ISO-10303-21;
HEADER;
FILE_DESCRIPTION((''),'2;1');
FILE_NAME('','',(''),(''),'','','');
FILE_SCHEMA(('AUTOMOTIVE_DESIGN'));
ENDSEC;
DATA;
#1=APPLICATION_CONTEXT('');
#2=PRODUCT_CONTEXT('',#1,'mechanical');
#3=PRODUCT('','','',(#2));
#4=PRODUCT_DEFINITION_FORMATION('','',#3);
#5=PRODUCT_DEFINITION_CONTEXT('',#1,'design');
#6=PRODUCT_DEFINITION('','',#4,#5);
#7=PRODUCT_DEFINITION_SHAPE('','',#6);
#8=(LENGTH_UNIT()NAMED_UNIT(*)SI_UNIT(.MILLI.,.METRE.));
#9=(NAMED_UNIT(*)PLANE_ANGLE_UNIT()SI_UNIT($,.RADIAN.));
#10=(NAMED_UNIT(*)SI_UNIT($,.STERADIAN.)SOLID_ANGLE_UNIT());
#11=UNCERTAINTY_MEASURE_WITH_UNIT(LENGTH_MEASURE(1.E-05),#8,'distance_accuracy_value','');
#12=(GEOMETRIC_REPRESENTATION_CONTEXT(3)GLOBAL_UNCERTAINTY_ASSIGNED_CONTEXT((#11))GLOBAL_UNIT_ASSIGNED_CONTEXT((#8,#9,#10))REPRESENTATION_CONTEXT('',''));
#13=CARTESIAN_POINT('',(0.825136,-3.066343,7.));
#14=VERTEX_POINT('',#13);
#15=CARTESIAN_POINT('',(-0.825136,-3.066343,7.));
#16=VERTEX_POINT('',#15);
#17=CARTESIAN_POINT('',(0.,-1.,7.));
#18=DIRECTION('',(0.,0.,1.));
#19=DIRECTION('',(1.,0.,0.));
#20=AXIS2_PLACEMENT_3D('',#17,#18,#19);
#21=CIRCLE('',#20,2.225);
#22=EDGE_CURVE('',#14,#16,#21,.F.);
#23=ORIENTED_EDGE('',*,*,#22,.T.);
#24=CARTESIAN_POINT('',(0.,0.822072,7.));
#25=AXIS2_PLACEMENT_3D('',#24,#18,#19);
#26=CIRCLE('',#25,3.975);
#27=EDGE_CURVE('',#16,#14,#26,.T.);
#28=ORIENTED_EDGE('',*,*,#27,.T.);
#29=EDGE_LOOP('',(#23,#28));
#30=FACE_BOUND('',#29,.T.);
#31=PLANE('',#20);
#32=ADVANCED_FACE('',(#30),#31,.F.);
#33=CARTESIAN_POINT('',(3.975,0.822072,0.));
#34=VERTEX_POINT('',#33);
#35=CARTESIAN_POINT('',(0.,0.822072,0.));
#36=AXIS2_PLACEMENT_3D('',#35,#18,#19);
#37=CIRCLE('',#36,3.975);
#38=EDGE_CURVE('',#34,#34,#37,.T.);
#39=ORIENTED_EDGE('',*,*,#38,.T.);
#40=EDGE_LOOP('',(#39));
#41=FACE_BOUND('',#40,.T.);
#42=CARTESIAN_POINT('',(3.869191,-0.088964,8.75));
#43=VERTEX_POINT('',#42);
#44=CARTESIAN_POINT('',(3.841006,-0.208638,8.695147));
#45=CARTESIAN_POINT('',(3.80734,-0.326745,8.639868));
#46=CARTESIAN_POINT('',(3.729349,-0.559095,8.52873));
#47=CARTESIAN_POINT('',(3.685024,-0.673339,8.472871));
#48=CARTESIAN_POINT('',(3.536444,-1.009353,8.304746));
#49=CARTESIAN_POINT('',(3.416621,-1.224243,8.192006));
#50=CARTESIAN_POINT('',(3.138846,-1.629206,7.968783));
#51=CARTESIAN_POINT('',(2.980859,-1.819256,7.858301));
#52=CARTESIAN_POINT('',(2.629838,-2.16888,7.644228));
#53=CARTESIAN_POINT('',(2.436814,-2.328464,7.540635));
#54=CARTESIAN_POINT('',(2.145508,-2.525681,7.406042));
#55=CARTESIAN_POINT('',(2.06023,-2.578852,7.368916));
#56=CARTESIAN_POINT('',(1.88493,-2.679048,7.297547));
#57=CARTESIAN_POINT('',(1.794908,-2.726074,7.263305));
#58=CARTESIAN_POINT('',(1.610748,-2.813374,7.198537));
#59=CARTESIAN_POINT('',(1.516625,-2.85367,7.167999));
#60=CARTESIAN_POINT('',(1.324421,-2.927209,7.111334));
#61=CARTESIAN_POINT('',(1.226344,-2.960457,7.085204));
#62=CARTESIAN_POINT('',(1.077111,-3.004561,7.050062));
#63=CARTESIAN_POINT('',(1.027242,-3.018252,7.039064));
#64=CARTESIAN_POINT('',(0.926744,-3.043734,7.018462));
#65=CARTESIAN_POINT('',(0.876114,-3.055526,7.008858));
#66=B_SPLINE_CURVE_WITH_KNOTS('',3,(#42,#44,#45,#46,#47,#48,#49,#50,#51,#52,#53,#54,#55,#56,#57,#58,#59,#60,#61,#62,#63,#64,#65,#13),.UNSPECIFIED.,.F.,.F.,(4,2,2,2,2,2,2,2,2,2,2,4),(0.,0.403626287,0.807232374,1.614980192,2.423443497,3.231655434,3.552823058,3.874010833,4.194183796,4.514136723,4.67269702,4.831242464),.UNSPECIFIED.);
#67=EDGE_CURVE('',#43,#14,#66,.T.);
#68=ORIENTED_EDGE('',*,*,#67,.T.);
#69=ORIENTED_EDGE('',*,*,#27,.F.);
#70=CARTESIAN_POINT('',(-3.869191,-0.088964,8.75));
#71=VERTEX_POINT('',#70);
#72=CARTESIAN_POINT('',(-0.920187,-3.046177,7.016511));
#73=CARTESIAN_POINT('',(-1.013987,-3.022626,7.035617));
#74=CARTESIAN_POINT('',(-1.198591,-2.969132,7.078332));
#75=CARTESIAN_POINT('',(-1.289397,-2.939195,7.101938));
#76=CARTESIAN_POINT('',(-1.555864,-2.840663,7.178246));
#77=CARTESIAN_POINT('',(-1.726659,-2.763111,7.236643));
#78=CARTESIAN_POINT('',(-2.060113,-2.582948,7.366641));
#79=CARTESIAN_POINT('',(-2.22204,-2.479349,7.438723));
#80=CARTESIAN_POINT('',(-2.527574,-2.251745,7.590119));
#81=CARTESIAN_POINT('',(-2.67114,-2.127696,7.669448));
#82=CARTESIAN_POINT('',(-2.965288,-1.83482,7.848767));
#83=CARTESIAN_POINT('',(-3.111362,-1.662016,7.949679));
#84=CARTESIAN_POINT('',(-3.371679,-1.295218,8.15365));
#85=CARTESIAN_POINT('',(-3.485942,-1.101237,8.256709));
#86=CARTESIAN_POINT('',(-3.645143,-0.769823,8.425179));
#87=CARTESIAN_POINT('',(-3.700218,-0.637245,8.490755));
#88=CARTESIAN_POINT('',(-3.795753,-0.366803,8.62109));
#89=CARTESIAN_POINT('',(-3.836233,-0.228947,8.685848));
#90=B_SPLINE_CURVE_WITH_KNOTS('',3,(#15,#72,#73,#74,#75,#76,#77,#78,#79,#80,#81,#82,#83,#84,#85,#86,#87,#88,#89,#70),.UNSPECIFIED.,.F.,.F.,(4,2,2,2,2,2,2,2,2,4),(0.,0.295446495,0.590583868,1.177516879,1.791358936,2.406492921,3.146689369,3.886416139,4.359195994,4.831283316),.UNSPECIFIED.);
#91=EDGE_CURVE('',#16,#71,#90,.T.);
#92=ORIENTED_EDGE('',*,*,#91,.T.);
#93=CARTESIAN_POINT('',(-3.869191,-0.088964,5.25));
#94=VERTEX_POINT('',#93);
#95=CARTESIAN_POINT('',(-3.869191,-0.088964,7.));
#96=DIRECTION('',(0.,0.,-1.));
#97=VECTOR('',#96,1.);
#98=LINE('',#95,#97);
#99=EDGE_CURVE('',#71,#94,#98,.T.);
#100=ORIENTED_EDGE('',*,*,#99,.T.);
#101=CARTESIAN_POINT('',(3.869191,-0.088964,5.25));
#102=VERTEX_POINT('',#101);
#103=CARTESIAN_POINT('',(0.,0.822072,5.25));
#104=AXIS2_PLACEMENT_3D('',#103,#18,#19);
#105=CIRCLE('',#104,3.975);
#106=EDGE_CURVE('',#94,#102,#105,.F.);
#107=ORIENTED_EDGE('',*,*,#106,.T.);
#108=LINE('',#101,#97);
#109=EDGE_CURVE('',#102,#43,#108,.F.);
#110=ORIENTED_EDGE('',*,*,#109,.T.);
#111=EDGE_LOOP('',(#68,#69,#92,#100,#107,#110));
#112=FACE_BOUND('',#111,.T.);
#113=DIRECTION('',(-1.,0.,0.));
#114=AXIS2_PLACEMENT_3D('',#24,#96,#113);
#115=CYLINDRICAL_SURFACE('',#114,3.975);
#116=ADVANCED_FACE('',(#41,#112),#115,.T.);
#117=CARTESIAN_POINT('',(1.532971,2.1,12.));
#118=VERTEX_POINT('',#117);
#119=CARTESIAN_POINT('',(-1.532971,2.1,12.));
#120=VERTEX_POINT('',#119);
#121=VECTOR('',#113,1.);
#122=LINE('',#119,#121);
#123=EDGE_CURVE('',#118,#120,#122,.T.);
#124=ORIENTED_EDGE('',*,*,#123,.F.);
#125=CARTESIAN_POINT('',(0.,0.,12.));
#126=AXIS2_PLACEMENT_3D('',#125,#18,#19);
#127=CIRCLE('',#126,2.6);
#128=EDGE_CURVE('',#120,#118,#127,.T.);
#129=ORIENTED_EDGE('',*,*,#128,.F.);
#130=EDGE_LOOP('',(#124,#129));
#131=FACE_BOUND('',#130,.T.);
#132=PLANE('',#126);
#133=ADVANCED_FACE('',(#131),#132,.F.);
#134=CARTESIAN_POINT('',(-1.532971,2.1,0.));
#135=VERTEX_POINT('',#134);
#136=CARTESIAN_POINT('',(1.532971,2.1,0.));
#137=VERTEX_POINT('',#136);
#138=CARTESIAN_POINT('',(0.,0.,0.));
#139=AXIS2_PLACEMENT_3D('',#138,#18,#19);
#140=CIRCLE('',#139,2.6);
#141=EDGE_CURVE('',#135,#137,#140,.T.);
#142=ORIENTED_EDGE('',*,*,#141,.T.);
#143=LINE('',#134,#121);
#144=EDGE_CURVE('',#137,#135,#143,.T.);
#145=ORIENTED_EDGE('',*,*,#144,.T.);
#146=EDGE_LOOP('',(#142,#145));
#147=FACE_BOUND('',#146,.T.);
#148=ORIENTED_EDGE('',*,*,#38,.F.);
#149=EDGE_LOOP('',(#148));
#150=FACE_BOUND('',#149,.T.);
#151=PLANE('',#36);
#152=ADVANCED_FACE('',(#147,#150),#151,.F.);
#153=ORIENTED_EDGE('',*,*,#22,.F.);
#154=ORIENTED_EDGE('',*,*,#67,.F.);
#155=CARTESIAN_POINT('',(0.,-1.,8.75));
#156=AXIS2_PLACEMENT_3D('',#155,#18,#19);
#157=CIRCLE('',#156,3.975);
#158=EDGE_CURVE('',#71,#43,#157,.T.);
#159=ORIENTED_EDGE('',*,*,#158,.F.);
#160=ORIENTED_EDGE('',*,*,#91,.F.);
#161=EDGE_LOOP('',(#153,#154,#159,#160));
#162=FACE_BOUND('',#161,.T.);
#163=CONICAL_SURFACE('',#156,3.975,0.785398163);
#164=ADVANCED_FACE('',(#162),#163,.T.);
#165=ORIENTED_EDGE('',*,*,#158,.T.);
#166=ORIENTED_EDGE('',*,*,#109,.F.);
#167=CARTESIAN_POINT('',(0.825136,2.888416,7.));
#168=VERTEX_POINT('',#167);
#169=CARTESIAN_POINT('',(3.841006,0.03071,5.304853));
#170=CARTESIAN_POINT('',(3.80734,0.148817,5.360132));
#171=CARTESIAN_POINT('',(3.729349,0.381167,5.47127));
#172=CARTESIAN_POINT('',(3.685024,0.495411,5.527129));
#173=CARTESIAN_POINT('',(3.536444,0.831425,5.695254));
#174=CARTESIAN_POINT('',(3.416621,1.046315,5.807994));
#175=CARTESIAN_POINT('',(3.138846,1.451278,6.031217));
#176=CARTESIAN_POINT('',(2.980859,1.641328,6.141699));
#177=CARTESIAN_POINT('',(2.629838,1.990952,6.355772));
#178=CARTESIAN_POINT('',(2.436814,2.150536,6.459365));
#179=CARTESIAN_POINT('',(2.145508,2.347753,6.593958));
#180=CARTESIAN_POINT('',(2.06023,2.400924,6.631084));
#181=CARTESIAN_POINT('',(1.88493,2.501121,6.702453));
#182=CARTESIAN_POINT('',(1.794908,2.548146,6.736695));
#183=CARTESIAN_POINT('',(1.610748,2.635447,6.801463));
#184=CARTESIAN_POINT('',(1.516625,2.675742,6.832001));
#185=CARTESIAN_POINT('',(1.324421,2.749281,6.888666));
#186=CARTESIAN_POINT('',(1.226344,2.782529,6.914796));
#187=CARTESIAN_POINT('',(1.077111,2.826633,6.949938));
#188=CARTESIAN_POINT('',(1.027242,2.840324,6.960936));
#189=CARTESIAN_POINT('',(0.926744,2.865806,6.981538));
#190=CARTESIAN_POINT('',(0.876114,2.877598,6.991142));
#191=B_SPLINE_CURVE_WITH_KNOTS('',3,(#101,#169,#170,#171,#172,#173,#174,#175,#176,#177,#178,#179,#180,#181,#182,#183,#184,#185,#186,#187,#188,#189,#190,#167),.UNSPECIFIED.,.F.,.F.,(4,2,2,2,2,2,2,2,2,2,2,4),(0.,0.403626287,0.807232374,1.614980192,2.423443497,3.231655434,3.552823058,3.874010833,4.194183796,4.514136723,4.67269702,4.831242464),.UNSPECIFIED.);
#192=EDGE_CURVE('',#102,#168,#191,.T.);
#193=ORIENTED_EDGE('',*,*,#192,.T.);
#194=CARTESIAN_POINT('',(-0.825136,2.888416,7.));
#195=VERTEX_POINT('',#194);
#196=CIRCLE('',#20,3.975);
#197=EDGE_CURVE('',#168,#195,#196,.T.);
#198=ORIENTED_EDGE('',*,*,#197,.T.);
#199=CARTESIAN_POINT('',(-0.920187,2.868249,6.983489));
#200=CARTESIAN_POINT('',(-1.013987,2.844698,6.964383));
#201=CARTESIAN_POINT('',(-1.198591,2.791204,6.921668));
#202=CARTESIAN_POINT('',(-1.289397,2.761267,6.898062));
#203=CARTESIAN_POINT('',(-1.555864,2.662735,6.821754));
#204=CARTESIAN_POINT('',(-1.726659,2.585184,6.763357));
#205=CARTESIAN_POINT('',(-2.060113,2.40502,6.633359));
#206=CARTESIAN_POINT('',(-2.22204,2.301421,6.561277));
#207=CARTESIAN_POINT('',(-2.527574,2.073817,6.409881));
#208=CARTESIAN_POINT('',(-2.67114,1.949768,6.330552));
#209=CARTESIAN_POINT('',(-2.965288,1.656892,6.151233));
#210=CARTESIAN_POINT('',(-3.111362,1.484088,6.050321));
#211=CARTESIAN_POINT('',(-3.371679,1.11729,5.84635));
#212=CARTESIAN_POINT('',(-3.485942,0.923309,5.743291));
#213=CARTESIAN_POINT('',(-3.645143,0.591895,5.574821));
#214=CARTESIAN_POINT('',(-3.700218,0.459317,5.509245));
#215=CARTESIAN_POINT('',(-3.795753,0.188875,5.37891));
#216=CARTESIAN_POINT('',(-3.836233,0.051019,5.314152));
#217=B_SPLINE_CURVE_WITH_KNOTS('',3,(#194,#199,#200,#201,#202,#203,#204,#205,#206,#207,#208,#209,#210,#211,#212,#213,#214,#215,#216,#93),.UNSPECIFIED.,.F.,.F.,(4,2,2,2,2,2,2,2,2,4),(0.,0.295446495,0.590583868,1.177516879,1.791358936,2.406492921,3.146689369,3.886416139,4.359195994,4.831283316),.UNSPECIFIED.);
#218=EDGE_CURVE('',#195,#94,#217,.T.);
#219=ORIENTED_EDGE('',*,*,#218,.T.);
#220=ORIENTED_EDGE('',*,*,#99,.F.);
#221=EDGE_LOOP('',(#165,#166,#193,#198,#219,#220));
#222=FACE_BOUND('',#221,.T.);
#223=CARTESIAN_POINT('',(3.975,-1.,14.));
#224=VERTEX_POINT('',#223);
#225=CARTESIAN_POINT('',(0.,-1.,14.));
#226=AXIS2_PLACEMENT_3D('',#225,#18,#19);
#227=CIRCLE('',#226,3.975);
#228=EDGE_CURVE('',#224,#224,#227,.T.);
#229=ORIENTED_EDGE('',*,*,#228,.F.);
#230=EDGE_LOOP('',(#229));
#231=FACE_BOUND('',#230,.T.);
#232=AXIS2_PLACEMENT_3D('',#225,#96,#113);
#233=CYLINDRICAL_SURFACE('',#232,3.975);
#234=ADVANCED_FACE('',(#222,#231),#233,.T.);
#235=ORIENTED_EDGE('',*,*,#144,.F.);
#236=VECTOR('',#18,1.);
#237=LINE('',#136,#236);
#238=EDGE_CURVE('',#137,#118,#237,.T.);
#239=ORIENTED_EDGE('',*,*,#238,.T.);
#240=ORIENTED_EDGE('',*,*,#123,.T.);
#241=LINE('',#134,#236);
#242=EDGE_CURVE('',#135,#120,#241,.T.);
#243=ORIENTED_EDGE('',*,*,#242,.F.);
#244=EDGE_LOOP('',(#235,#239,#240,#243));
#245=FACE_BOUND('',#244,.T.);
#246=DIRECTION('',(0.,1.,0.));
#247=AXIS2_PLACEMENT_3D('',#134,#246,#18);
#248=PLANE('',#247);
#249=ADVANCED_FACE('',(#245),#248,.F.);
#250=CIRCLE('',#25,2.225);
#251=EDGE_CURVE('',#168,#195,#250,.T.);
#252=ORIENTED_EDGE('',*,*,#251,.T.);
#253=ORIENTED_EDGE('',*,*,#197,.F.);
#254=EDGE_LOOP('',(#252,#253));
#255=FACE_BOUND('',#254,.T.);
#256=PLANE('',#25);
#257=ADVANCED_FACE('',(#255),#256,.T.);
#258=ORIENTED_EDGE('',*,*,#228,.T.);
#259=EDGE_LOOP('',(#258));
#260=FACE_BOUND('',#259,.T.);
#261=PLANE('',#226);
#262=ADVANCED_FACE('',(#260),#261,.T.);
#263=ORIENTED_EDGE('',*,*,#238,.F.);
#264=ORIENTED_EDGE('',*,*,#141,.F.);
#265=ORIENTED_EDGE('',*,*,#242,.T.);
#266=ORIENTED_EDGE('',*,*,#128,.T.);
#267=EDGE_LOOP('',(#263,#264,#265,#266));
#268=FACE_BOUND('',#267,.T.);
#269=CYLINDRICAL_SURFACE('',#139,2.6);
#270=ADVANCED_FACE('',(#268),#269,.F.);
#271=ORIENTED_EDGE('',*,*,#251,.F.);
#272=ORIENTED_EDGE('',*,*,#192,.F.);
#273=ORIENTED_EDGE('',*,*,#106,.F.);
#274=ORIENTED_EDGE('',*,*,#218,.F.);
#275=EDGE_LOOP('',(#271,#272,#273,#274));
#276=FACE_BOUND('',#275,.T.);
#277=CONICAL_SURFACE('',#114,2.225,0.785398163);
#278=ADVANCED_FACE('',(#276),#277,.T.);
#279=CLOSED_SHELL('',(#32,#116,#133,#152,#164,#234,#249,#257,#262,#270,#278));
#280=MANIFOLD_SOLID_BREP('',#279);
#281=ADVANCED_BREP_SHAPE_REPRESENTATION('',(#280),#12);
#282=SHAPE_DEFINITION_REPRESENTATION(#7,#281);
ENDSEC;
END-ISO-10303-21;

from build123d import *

# Parameters (mm, degrees)
ESQUISSE1_R             = 3.975
BOSS_EXTRU_1_DEPTH      = 7
ESQUISSE2_R             = 3.975
BOSS_EXTRU_2_DEPTH      = 7
ENL_V_START             = -2
ENL_V_MAT_EXTRU_1_DEPTH = 14.38022269
CHANFREIN2_SIZE         = 1.75
CHANFREIN4_SIZE         = 1.75


with BuildPart() as part:
    # Esquisse1 → Boss.-Extru.1 (new body)
    with BuildSketch(Plane.XY):
        with Locations((0, 0.822072072)):
            Circle(ESQUISSE1_R)
    extrude(amount=BOSS_EXTRU_1_DEPTH)

    # Esquisse2 → Boss.-Extru.2 (add)
    with BuildSketch(Plane.XY.offset(7)):
        with Locations(Location((0, -1, 0), (0, 0, 166.750525957))):
            Circle(ESQUISSE2_R)
    extrude(amount=BOSS_EXTRU_2_DEPTH)

    # Esquisse3 → Enlèv. mat.-Extru.1 (cut, through all)
    with BuildSketch(Plane.XY.offset(14).offset(ENL_V_START)):
        with BuildLine():
            Line((-1.532970972, 2.1), (1.532970972, 2.1))
            ThreePointArc((1.532970972, 2.1), (0, -2.6), (-1.532970972, 2.1))
        make_face()
    extrude(amount=-ENL_V_MAT_EXTRU_1_DEPTH, mode=Mode.SUBTRACT)

    # Chanfrein2
    # the kernel refuses this chamfer: 1.75 mm, written as the material it takes off along each edge
    with BuildSketch(Plane(origin=(0, 0.822072072, 7), x_dir=(1, 0, 0), z_dir=(0, -1, 0))) as chanfrein2_piece_1_section:
        Polygon((3.975, -CHANFREIN2_SIZE), (3.975 - CHANFREIN2_SIZE, 0), (3.975, 0), align=None)
    chanfrein2_piece_1 = revolve(axis=Axis((0, 0.822072072, 7), (0, 0, 1)), revolution_arc=258.239304613, mode=Mode.PRIVATE)
    chanfrein2_piece_1 = chanfrein2_piece_1 - Plane(origin=(0, -1, 6.142541617), x_dir=(-0.9733813624059963, 0.22919145560130838, 0), z_dir=(0, 0, -1)) * Cylinder(3.975, 16, mode=Mode.PRIVATE)
    add(chanfrein2_piece_1, mode=Mode.SUBTRACT)
    with BuildSketch(Plane(origin=(0, 0.822072072, 7), x_dir=(0.20586939253859726, -0.9785794772095873, 0), z_dir=(-0.9785794772095873, -0.20586939253859726, 0))) as chanfrein2_piece_2_section:
        Polygon((3.975, -CHANFREIN2_SIZE), (3.975 - CHANFREIN2_SIZE, 0), (3.975, 0), align=None)
    chanfrein2_piece_2 = revolve(axis=Axis((0, 0.822072072, 7), (0, 0, 1)), revolution_arc=78.119602811, mode=Mode.PRIVATE)
    chanfrein2_piece_2 = chanfrein2_piece_2 - Plane(origin=(0, -1, 6.194476716), x_dir=(-0.9733813624059963, 0.22919145560130838, 0), z_dir=(0, 0, -1)) * Cylinder(3.975, 16, mode=Mode.PRIVATE)
    add(chanfrein2_piece_2, mode=Mode.SUBTRACT)

    # Chanfrein4
    # the kernel refuses this chamfer: 1.75 mm, written as the material it takes off along each edge
    with BuildSketch(Plane(origin=(0, -1, 7), x_dir=(-0.2035326199648153, 0.9790681654564498, 0), z_dir=(0.9790681654564498, 0.2035326199648153, 0))) as chanfrein4_piece_1_section:
        Polygon((3.975 - CHANFREIN4_SIZE, 0), (3.975, CHANFREIN4_SIZE), (3.975, 0), align=None)
    chanfrein4_piece_1 = revolve(axis=Axis((0, -1, 7), (0, 0, 1)), revolution_arc=336.512773019, mode=Mode.PRIVATE)
    chanfrein4_piece_1 = chanfrein4_piece_1 - Plane(origin=(0, 0.822072072, 7.857337324), x_dir=(1, 0, 0), z_dir=(0, 0, -1)) * Cylinder(3.975, 16, mode=Mode.PRIVATE)
    add(chanfrein4_piece_1, mode=Mode.SUBTRACT)


solid = part.part
